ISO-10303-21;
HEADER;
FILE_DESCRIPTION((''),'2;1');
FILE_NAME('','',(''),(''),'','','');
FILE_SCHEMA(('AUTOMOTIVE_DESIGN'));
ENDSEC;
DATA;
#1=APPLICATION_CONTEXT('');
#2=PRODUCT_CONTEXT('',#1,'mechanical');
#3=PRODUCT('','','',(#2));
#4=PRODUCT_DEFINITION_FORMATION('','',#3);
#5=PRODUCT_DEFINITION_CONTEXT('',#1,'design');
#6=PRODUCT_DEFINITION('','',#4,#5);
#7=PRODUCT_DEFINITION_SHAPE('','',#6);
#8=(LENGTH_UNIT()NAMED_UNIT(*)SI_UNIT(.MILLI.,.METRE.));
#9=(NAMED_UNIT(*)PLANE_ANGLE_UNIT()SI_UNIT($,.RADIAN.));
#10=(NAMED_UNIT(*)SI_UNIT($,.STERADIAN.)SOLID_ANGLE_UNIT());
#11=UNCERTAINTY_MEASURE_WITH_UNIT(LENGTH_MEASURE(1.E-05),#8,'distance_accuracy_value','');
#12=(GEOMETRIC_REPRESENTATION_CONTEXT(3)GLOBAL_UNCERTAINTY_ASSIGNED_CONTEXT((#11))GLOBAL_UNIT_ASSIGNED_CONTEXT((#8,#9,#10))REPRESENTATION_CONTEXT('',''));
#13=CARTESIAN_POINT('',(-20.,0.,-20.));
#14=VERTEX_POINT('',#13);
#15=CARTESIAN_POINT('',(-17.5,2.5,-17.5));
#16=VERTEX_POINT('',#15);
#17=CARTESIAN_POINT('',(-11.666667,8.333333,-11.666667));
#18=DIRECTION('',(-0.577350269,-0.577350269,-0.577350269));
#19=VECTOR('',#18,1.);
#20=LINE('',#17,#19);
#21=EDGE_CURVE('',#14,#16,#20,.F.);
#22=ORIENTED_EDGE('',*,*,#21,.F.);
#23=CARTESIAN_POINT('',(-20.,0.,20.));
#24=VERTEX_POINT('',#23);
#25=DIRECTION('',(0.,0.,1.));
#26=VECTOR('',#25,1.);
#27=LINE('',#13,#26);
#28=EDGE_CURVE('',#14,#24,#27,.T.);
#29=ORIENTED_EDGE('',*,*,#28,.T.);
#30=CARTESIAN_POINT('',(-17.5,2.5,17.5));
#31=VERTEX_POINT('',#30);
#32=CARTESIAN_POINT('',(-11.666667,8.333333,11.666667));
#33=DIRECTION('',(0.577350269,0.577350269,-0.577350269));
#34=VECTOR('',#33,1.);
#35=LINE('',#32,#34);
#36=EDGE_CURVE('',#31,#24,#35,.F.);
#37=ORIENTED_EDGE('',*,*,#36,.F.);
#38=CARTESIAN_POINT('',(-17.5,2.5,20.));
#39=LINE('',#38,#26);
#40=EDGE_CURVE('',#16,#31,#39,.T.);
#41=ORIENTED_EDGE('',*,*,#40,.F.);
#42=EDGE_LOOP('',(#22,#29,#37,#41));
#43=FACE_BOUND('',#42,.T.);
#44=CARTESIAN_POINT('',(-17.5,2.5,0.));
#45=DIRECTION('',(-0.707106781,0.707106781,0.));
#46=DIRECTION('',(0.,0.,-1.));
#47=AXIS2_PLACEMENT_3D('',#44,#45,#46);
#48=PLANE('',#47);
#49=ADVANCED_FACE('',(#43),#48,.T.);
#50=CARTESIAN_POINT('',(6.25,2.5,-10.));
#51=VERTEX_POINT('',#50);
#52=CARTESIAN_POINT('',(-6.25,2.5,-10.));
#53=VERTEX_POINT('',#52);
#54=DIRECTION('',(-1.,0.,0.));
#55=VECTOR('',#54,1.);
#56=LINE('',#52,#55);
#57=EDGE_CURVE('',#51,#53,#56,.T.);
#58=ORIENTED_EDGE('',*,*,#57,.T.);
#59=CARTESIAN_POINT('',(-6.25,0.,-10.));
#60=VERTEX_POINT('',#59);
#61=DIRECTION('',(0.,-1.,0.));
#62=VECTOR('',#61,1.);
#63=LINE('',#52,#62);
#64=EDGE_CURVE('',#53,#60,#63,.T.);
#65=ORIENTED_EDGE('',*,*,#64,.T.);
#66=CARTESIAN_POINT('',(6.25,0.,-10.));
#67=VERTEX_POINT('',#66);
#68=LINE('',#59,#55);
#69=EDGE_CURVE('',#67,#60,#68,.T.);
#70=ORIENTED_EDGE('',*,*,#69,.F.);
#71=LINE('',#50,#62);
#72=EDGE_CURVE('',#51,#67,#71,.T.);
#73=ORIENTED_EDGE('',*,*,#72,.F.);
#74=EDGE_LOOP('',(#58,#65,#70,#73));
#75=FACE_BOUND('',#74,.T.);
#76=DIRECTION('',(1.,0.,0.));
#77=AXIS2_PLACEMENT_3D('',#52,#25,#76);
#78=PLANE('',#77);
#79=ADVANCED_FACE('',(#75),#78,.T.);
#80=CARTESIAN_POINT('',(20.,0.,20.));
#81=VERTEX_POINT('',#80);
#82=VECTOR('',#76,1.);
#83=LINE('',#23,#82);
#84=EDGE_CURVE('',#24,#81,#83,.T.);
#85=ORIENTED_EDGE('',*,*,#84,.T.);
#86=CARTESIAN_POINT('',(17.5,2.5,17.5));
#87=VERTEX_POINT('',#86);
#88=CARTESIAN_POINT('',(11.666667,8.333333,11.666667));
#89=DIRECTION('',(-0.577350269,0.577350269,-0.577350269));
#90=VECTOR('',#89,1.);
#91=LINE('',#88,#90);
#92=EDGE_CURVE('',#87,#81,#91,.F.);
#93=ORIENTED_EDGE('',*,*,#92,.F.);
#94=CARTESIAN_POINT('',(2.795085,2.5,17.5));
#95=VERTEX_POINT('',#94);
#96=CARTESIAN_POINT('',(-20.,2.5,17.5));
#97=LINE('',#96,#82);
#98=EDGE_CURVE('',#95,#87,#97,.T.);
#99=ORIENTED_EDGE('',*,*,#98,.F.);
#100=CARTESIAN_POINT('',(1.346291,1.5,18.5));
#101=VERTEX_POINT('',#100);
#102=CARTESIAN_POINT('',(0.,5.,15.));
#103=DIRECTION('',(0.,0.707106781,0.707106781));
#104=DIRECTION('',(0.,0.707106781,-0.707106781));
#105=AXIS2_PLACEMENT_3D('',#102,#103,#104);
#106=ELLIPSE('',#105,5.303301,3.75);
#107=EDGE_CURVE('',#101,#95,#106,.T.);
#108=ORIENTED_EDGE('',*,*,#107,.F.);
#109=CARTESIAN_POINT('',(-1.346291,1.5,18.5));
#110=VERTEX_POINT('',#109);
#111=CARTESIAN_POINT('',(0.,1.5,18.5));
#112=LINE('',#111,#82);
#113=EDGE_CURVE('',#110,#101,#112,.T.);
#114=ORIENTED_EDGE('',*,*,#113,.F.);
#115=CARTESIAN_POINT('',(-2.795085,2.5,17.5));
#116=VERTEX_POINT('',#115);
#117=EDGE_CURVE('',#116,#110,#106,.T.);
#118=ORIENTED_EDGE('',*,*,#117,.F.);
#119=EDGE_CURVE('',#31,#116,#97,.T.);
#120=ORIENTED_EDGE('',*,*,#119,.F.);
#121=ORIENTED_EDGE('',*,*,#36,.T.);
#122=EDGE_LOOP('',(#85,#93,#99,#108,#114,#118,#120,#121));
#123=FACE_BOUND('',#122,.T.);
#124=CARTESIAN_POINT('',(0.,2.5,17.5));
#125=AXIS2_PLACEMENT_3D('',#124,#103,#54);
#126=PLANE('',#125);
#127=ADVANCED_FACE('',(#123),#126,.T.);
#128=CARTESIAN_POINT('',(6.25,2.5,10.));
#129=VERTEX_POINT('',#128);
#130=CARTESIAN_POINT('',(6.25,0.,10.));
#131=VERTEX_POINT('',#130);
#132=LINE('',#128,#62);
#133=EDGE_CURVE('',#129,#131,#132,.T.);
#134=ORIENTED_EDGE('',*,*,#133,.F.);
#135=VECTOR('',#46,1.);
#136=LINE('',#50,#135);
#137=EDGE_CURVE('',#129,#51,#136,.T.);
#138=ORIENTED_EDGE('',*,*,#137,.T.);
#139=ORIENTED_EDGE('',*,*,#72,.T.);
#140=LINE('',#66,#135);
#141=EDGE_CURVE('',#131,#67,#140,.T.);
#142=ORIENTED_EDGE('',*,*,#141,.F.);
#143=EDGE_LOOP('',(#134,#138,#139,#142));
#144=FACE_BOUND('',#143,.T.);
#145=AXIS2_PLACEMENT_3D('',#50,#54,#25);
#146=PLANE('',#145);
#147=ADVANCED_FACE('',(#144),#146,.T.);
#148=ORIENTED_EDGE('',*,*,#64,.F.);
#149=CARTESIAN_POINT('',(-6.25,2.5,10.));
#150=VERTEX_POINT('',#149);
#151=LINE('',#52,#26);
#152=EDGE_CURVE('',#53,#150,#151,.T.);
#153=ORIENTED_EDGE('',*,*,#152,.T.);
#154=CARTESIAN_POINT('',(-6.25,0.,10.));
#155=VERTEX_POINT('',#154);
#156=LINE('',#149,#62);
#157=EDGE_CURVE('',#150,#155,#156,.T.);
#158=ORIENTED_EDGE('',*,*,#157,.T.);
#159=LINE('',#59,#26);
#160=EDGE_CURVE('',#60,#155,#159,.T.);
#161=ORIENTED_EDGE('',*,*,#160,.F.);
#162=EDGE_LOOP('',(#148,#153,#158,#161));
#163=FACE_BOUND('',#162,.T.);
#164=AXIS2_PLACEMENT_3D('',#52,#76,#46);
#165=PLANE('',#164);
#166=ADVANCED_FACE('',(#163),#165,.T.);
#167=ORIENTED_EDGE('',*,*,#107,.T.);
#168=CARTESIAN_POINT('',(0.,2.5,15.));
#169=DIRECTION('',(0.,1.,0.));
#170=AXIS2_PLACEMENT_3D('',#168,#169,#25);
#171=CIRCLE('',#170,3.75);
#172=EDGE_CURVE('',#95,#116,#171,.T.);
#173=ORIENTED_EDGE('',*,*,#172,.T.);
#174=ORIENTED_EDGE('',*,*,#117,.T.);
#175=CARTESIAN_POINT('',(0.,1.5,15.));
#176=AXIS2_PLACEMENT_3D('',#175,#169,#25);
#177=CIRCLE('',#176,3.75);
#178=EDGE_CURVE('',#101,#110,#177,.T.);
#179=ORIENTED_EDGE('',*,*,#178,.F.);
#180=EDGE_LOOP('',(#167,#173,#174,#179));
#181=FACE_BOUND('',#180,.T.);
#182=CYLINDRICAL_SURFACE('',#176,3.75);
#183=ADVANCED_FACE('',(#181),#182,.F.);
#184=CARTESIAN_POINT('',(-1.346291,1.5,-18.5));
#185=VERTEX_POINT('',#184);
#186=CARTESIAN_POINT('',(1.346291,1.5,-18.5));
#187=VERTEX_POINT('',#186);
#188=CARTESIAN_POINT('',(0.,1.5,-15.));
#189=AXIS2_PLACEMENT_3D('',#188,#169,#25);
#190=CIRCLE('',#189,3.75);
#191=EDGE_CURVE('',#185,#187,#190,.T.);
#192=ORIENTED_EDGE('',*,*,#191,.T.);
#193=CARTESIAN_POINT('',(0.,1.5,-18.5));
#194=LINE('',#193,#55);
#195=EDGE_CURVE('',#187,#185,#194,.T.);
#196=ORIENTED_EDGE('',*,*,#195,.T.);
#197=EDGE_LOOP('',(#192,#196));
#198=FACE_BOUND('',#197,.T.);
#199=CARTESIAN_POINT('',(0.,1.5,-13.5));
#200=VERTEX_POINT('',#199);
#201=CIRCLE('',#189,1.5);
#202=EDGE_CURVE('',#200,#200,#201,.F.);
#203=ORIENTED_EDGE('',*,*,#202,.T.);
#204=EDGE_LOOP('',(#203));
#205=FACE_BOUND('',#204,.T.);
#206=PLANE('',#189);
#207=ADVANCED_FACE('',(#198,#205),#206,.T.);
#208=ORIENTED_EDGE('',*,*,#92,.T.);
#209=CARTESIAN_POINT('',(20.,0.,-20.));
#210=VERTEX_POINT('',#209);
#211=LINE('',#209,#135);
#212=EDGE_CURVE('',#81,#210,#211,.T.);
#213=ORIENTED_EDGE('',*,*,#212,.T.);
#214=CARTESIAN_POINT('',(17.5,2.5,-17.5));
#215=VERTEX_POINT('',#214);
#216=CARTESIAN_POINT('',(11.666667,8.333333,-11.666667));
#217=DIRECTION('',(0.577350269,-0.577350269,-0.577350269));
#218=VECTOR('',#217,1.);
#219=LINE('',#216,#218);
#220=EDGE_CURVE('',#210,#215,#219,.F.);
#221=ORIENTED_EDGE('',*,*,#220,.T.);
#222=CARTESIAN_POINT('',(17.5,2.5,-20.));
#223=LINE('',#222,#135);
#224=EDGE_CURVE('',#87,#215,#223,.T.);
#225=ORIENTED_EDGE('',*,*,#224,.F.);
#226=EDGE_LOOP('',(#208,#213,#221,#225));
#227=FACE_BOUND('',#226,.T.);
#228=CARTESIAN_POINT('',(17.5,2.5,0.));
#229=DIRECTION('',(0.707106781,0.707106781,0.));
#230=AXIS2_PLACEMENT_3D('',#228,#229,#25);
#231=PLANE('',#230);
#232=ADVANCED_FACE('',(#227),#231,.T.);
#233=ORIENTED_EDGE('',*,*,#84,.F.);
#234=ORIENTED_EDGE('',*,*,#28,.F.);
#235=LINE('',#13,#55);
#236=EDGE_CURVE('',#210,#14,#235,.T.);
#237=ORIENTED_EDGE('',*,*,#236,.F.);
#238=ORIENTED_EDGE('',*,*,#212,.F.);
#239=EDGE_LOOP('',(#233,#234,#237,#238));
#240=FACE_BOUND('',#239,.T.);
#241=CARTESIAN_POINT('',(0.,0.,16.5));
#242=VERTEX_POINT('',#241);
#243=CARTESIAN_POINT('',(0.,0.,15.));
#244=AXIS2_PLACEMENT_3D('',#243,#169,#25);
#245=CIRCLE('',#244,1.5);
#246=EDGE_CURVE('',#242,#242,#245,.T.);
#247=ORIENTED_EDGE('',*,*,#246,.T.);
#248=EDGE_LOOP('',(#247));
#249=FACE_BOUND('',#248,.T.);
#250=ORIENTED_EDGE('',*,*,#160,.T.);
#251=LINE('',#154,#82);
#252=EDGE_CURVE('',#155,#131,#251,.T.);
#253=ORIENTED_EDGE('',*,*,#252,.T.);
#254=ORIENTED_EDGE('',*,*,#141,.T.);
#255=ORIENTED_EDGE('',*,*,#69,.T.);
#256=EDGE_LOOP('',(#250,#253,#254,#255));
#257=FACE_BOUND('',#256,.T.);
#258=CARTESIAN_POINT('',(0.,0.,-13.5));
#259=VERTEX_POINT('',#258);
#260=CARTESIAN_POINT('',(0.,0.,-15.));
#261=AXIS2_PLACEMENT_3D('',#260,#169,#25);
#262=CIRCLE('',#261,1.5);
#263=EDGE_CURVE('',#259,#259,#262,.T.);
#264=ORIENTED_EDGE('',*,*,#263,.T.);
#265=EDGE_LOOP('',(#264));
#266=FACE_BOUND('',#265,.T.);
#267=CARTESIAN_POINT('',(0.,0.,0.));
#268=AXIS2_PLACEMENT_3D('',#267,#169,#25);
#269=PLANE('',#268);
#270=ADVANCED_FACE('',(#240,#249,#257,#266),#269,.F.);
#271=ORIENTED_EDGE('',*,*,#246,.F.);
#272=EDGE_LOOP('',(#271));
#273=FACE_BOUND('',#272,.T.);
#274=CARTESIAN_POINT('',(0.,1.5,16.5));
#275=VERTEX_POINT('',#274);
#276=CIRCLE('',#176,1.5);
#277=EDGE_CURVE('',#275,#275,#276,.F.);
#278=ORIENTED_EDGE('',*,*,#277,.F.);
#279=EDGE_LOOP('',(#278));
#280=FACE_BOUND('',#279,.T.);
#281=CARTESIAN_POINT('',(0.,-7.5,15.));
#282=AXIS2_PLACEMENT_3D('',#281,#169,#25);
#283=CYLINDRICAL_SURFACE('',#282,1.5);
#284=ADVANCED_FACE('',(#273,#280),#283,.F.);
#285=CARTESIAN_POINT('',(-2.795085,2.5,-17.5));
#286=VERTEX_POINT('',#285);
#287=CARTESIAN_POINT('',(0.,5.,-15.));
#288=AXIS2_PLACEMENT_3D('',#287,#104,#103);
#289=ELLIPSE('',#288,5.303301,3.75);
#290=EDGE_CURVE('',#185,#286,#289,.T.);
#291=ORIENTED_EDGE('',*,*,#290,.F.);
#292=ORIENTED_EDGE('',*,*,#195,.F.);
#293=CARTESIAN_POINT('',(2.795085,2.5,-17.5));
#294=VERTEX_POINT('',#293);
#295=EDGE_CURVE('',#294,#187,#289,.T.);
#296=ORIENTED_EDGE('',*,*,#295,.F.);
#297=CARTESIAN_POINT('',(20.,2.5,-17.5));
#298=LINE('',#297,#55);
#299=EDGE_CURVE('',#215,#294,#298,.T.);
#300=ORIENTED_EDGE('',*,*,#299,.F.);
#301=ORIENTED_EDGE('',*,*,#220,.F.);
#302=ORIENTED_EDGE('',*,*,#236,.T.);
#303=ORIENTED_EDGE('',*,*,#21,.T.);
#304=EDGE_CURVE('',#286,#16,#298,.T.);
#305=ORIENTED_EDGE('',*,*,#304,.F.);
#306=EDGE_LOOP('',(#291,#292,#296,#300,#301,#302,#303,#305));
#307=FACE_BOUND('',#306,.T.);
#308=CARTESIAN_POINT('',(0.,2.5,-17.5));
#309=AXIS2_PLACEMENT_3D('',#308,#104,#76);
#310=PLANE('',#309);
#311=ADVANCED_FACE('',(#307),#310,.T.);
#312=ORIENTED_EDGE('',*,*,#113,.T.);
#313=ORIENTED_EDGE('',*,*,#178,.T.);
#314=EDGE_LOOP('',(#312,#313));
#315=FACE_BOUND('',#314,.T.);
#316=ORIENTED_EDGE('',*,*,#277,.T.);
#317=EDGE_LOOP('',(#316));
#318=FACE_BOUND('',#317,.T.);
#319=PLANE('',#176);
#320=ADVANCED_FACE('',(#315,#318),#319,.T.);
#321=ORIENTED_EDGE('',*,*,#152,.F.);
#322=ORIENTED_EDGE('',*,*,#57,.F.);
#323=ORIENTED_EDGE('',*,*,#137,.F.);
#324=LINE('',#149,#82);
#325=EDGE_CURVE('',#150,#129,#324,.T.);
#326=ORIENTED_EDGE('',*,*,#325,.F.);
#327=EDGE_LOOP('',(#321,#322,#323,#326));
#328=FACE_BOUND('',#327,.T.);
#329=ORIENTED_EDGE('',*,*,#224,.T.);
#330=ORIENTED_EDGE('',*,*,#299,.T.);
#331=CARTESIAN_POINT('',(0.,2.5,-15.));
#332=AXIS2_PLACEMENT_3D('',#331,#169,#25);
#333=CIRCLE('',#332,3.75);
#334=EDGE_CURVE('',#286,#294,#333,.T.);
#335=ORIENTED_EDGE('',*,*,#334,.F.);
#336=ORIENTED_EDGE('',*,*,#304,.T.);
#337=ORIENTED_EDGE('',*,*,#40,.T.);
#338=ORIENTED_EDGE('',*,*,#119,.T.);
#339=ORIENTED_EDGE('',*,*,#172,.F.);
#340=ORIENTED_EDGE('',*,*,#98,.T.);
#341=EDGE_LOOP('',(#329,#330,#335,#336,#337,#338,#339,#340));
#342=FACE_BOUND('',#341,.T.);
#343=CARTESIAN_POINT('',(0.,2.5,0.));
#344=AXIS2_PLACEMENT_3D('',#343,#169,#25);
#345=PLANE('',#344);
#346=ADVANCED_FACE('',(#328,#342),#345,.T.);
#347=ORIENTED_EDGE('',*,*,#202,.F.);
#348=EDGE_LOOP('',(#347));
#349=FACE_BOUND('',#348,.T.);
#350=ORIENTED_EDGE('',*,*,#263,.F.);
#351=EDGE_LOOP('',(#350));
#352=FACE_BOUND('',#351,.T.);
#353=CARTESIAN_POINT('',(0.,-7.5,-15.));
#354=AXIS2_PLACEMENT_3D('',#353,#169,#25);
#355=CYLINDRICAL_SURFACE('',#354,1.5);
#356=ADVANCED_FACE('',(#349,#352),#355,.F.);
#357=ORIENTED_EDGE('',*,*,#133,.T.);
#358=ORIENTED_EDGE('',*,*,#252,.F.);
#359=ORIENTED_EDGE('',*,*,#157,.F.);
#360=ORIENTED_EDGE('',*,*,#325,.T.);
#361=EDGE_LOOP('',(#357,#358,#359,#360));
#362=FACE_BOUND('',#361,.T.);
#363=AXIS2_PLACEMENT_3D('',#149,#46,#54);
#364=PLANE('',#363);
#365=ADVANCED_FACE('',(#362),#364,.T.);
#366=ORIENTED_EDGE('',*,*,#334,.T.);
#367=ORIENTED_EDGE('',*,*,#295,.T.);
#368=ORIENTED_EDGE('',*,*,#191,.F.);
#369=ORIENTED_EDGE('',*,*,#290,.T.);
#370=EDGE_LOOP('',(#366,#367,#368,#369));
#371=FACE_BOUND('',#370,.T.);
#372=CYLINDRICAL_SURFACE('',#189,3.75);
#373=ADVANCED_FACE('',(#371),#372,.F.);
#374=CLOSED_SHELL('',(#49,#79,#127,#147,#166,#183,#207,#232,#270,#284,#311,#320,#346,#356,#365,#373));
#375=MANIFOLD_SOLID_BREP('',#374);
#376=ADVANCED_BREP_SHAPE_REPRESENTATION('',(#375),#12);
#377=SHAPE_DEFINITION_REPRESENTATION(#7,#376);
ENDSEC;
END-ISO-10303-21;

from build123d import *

# Parameters (mm, degrees)
SKETCH1_W           = 40
SKETCH1_H           = 40
SKETCH1_W_2         = 12.5
SKETCH1_H_2         = 20
BOSS_EXTRUDE1_DEPTH = 2.5
SKETCH2_R           = 1.5
CUT_EXTRUDE1_DEPTH  = 10
SKETCH3_R           = 3.75
CUT_EXTRUDE2_DEPTH  = 1
CHAMFER1_SIZE       = 2.5


with BuildPart() as part:
    # Sketch1 → Boss-Extrude1 (new body)
    with BuildSketch(Plane(origin=(0, 0, 0), x_dir=(1, 0, 0), z_dir=(0, 1, 0))):
        Rectangle(SKETCH1_W, SKETCH1_H)
        Rectangle(SKETCH1_W_2, SKETCH1_H_2, mode=Mode.SUBTRACT)
    extrude(amount=BOSS_EXTRUDE1_DEPTH)

    # Sketch2 → Cut-Extrude1 (cut)
    with BuildSketch(Plane(origin=(0, 2.5, 0), x_dir=(1, 0, 0), z_dir=(0, 1, 0))):
        with Locations(Location((0, 15, 0), (0, 0, 270))):
            Circle(SKETCH2_R)
        with Locations(Location((0, -15, 0), (0, 0, 270))):
            Circle(SKETCH2_R)
    extrude(amount=-CUT_EXTRUDE1_DEPTH, mode=Mode.SUBTRACT)

    # Sketch3 → Cut-Extrude2 (cut)
    with BuildSketch(Plane(origin=(0, 2.5, 0), x_dir=(1, 0, 0), z_dir=(0, 1, 0))):
        with Locations(Location((0, 15, 0), (0, 0, 270))):
            Circle(SKETCH3_R)
        with Locations(Location((0, -15, 0), (0, 0, 270))):
            Circle(SKETCH3_R)
    extrude(amount=-CUT_EXTRUDE2_DEPTH, mode=Mode.SUBTRACT)

    # Chamfer1
    # the kernel refuses this chamfer: 2.5 mm, written as the material it takes off along each edge
    with BuildSketch(Plane(origin=(20, 2.5, -26.42920747), x_dir=(0.027495876610586317, -0.9996219169112968, 0), z_dir=(0, 0, 1)), Plane(origin=(-26.42920747, 2.5, -20), x_dir=(0, -0.9996219169112968, -0.027495876610586317), z_dir=(1, 0, 0)), Plane(origin=(-20, 2.5, 26.42920747), x_dir=(-0.027495876610586317, -0.9996219169112968, 0), z_dir=(0, 0, -1))) as chamfer1_piece_1:
        Polygon((CHAMFER1_SIZE * 0.999621916911, -CHAMFER1_SIZE * 0.0274958766106), (-CHAMFER1_SIZE * 0.0274958766106, -CHAMFER1_SIZE * 0.999621916911), (0, 0), align=None)
    extrude(amount=52.85841494, mode=Mode.SUBTRACT)
    with BuildSketch(Plane(origin=(26.42920747, 2.5, 20), x_dir=(0, 0.027495876610586317, -0.9996219169112968), z_dir=(-1, 0, 0))) as chamfer1_piece_2:
        Polygon((CHAMFER1_SIZE * 0.999621916911, CHAMFER1_SIZE * 0.0274958766106), (-CHAMFER1_SIZE * 0.0274958766106, CHAMFER1_SIZE * 0.999621916911), (0, 0), align=None)
    extrude(amount=52.85841494, mode=Mode.SUBTRACT)


solid = part.part
